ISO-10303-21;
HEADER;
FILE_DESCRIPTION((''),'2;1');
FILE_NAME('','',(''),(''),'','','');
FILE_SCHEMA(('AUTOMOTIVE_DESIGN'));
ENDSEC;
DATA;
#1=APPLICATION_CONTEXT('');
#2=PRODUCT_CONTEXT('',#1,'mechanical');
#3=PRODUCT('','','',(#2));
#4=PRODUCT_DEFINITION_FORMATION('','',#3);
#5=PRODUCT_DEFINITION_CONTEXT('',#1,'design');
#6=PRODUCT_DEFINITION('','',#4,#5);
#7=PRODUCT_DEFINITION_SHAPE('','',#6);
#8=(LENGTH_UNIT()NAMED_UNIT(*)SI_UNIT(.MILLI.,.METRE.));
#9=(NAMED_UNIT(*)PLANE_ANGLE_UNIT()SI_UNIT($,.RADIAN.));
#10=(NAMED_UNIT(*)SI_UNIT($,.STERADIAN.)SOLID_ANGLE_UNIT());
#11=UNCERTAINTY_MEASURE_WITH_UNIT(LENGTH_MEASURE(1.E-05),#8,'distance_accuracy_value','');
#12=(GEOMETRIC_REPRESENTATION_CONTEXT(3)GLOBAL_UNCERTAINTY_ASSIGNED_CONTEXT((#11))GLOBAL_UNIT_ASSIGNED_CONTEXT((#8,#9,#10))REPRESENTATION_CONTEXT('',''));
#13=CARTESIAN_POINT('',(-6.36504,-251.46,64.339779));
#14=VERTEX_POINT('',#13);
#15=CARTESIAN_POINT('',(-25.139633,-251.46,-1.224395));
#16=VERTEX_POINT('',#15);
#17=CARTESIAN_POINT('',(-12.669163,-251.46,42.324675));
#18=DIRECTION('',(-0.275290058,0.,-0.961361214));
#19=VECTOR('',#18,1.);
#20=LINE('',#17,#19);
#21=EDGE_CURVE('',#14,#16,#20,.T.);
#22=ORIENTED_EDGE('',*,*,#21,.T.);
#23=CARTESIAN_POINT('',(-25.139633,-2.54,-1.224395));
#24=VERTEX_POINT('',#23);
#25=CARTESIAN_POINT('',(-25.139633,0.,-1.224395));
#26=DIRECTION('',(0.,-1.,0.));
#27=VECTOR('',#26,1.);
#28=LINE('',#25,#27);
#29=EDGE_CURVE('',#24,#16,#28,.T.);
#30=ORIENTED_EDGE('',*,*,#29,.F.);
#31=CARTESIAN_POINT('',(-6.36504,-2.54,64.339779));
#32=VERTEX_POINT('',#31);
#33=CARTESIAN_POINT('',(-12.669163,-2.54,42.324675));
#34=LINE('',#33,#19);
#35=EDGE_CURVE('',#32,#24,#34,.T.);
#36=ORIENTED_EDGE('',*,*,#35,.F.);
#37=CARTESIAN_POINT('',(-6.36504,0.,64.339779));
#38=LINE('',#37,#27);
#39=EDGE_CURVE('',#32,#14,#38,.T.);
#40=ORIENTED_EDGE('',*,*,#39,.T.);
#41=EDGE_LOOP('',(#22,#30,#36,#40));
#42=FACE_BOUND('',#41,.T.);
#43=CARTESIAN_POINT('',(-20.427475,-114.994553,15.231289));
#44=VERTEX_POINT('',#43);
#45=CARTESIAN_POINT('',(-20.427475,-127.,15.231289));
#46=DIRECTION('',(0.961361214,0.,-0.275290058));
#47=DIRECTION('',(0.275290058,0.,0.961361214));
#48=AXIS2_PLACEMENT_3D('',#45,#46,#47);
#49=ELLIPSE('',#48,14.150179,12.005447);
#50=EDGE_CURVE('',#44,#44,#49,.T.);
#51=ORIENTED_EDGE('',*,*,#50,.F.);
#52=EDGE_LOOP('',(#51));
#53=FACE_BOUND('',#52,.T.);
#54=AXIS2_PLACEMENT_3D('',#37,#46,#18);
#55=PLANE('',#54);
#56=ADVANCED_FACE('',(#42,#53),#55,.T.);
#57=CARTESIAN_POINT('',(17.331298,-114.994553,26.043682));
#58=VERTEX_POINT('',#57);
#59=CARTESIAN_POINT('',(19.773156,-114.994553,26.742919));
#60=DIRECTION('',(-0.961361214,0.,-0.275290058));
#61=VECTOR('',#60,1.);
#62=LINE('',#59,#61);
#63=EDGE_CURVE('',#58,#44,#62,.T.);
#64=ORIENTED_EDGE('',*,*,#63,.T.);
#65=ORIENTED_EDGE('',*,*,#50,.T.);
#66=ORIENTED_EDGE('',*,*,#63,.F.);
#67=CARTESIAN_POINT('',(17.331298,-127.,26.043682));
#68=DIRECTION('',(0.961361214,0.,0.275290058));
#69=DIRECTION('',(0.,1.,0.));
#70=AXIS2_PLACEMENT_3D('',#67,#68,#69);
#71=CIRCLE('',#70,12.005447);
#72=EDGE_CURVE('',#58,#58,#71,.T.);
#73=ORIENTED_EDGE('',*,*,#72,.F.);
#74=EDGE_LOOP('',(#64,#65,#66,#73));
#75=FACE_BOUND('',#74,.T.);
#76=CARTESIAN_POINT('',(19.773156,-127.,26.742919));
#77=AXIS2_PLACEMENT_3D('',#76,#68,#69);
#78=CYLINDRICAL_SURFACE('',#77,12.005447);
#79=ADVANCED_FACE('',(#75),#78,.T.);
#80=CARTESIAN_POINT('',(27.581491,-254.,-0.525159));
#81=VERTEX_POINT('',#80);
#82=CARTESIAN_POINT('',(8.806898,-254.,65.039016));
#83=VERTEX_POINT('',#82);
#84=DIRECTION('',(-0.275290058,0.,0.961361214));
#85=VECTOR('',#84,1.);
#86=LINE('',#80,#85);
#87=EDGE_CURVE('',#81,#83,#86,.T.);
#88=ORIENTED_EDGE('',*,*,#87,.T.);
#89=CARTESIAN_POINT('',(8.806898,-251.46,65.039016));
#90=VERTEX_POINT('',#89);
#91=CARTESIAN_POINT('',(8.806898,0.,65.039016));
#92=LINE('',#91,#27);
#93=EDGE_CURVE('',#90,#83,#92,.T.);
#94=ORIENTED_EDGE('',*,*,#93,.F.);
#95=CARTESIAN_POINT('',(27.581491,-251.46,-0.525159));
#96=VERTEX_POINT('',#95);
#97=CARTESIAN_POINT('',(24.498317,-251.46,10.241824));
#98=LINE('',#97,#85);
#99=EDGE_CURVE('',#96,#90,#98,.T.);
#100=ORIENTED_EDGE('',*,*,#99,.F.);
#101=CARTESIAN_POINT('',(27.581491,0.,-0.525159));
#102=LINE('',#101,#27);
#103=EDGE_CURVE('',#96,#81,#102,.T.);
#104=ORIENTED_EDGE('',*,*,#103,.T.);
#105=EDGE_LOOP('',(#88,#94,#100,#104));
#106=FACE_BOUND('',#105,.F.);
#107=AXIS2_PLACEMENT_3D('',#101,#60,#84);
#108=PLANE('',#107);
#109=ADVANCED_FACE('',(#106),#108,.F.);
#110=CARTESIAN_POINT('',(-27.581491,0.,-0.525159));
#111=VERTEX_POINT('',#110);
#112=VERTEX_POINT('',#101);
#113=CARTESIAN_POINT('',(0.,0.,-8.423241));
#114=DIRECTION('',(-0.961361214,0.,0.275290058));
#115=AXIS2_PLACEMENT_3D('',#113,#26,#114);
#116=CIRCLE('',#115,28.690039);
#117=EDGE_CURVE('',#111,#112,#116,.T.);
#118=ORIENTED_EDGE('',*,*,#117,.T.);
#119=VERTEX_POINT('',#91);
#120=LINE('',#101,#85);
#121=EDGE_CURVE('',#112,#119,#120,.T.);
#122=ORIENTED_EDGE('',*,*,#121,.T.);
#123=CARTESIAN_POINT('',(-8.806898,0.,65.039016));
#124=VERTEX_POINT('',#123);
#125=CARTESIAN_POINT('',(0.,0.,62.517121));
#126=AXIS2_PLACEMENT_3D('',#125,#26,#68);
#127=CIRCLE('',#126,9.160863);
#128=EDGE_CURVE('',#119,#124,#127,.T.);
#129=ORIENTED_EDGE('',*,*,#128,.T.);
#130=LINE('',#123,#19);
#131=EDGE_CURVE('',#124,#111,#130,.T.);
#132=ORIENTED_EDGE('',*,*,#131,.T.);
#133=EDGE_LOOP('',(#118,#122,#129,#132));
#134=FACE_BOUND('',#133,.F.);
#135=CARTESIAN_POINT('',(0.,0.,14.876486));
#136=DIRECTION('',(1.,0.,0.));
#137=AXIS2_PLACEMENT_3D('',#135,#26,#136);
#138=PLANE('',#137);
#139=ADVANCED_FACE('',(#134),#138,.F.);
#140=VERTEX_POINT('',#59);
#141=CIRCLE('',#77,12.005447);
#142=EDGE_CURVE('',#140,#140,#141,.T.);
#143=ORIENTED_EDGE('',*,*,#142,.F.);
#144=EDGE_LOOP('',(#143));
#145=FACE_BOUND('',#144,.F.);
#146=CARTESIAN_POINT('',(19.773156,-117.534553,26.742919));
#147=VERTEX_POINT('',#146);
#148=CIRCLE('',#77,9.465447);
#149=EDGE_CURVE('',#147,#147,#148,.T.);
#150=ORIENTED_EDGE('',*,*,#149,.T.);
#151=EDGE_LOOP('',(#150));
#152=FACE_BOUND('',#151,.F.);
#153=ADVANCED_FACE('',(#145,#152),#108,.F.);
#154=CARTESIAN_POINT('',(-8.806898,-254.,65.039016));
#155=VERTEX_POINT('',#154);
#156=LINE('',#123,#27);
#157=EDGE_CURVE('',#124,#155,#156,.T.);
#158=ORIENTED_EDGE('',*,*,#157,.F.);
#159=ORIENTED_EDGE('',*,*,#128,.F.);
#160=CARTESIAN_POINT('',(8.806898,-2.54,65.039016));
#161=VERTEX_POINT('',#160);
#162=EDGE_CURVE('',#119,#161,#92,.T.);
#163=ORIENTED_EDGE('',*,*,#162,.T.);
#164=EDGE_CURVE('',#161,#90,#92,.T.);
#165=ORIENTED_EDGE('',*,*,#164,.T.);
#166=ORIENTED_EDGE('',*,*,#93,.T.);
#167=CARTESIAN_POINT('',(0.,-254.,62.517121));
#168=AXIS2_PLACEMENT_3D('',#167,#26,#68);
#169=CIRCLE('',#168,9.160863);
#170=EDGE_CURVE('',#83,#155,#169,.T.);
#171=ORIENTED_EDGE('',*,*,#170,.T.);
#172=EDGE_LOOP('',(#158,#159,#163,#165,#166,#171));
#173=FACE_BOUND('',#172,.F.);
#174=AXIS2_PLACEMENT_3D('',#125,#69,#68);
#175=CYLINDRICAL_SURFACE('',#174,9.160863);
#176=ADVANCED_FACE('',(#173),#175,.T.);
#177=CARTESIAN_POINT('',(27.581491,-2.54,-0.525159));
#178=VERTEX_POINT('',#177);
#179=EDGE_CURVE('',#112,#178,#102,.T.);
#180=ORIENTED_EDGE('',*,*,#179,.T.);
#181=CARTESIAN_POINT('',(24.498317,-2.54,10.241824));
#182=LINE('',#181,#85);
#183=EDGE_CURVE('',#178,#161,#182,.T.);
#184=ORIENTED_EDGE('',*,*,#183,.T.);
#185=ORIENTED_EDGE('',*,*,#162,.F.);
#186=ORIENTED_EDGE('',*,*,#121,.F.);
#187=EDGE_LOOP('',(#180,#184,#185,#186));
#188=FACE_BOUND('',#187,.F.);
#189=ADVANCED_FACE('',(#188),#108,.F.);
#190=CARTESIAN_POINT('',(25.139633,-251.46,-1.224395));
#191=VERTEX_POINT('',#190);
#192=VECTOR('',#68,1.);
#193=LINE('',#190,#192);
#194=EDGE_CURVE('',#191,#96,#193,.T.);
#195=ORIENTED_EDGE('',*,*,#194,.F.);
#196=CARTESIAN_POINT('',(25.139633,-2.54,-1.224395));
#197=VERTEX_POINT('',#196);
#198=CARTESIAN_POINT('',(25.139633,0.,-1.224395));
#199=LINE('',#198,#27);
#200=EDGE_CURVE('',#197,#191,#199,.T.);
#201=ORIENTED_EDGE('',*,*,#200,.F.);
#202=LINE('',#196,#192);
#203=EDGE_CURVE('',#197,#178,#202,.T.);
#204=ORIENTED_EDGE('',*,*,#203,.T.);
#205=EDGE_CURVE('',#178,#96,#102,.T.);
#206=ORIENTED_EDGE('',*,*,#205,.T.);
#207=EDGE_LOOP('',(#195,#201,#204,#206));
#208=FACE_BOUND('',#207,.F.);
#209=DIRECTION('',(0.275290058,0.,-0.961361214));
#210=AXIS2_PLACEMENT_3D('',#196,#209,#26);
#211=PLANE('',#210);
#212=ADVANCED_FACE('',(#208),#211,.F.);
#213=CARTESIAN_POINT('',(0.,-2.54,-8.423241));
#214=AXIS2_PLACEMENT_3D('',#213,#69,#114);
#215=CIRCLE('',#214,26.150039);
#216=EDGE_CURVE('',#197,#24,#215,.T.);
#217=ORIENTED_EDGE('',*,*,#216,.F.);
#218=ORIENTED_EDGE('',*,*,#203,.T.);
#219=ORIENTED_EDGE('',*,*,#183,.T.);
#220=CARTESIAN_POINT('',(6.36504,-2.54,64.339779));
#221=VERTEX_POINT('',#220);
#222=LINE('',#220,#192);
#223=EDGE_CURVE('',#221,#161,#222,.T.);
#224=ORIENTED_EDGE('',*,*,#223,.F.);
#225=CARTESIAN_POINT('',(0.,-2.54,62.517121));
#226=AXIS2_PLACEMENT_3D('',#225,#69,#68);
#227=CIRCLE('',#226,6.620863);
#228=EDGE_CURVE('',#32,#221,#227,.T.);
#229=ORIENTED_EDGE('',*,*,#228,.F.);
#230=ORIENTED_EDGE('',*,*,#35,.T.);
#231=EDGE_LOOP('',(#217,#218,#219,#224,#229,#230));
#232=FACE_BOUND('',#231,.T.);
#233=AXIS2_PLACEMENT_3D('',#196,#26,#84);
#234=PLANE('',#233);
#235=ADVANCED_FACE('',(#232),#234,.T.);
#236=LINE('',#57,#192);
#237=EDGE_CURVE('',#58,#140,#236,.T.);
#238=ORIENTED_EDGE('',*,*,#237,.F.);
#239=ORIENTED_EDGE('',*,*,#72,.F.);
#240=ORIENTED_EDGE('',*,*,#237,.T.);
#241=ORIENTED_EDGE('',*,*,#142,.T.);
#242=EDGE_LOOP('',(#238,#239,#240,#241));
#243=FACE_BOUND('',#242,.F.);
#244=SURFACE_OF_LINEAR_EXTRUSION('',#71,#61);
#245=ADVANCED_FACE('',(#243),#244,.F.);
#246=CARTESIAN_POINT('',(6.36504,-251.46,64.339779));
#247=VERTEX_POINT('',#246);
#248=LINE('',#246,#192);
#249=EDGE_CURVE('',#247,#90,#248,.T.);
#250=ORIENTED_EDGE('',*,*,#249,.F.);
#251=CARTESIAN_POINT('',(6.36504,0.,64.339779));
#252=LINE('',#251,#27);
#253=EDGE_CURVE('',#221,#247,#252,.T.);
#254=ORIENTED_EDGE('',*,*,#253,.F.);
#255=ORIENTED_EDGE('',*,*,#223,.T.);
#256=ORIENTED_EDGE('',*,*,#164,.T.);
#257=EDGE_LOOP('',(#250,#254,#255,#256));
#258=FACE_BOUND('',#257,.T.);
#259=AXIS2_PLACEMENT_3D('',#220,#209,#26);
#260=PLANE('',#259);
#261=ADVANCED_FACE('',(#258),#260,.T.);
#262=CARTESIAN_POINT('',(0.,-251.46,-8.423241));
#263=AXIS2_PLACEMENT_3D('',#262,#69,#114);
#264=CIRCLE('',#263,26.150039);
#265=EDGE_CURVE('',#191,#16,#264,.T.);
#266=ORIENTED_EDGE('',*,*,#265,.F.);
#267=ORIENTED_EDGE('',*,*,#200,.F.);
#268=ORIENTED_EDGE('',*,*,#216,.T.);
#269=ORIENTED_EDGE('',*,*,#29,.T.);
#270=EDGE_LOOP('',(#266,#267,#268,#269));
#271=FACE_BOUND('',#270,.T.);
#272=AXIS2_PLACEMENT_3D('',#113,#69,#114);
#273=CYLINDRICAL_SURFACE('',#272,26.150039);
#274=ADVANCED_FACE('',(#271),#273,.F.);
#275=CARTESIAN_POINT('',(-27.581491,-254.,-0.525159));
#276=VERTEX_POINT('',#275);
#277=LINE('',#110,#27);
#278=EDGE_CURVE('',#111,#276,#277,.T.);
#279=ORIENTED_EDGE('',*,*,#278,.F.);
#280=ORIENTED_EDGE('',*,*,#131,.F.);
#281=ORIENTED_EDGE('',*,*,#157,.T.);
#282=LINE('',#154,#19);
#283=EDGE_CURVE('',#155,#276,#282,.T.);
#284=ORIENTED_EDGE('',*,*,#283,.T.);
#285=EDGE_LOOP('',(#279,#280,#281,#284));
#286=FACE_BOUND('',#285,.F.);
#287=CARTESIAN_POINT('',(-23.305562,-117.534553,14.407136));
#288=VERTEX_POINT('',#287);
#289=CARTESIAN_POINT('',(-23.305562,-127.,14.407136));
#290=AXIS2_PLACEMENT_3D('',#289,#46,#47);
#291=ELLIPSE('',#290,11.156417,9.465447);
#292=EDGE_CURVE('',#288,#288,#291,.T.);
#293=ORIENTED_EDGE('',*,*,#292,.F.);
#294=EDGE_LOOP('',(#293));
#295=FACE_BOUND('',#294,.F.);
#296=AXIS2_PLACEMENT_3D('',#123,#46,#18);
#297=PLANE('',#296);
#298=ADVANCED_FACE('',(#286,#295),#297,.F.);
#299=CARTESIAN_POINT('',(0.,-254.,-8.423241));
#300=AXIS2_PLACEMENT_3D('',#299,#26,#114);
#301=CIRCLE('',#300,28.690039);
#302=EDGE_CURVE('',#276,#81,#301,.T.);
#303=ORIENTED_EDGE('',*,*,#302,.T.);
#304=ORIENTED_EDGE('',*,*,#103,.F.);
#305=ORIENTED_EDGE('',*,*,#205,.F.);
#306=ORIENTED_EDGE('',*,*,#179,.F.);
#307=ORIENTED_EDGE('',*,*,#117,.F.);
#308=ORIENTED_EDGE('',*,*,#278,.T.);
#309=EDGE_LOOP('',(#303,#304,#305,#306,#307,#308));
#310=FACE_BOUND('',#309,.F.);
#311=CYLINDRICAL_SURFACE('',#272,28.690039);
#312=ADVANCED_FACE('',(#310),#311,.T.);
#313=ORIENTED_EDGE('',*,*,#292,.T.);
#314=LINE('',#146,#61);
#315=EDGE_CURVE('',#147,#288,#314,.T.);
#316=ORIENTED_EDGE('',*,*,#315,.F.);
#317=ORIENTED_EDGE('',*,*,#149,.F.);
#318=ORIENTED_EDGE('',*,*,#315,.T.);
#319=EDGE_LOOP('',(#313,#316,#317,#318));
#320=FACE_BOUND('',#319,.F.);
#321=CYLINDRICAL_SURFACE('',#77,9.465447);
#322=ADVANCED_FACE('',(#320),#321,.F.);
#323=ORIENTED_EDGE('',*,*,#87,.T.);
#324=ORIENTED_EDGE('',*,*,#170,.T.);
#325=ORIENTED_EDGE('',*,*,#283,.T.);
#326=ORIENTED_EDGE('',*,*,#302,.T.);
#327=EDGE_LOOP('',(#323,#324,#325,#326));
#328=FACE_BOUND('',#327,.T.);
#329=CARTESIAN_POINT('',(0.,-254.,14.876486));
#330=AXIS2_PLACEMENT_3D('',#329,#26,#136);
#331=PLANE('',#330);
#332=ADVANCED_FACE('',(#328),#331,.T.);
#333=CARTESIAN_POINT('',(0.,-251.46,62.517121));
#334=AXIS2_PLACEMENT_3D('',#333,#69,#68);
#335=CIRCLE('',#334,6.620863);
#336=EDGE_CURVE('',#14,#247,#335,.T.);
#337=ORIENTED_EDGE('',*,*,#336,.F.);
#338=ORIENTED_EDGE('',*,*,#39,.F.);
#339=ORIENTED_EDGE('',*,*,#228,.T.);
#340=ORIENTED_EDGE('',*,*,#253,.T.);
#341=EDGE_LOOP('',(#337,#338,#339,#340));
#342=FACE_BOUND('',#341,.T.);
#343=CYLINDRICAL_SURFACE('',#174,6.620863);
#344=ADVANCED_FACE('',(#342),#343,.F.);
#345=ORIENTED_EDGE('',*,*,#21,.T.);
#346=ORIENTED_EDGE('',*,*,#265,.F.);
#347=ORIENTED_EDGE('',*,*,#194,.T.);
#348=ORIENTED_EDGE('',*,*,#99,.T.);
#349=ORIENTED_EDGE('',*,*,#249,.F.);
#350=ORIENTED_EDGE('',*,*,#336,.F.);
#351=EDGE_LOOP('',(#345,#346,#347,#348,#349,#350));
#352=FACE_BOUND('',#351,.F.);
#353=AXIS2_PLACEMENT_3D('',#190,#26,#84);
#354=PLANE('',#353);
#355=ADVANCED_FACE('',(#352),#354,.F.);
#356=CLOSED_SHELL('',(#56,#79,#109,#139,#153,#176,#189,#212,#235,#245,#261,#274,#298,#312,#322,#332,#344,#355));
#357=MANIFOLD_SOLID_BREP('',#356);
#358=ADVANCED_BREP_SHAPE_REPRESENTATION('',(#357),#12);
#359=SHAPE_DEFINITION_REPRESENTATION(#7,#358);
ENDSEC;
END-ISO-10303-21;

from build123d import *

# Parameters (mm, degrees)
F1_DEPTH = 254
F2_R     = 9.4654470454
F3_DEPTH = 64.1706123384
F4_T     = -2.54


# Not quite as in the source:
# - a shell that OpenCascade refuses in one call is made with other operations: the cavity is built on its own and cut out


with BuildPart() as f1:
    # F0 (on Front) → F1 (new body)
    with BuildSketch(Plane.XZ):
        with BuildLine():
            Line((-8.8068979187, 65.0390158129), (-27.5814907687, -0.52515852))
            ThreePointArc((-27.5814907687, -0.52515852), (0, -37.1132800896), (27.5814907687, -0.52515852))
            Line((27.5814907687, -0.52515852), (8.8068979187, 65.0390158129))
            ThreePointArc((8.8068979187, 65.0390158129), (0, 71.6779839596), (-8.8068979187, 65.0390158129))
        make_face()
    extrude(amount=F1_DEPTH)

    # F2 (on face) → F3 (cut, through all)
    with BuildSketch(Plane(origin=(25.3522532018, 0, 7.2597304326), x_dir=(0, 1, 0), z_dir=(0.961361214, 0, 0.2752900583))):
        with Locations((-127, 20.2662516385)):
            Circle(F2_R)
    extrude(amount=-F3_DEPTH, mode=Mode.SUBTRACT)

    # F4: a shell. OpenCascade refuses it in one call, so the cavity is built on its own and cut out:
    # the body offset inwards by the wall thickness, plus a prism from it out through each open face.
    f4_core = offset(f1.part, amount=F4_T, mode=Mode.PRIVATE)
    f4_exits = [f4_core.faces().sort_by_distance(p)[0] for p in [
        (24.429127, -127, 1.256817),
    ]]
    add(f4_core, mode=Mode.SUBTRACT)
    extrude(f4_exits, amount=-F4_T, mode=Mode.SUBTRACT)


solid = f1.part
